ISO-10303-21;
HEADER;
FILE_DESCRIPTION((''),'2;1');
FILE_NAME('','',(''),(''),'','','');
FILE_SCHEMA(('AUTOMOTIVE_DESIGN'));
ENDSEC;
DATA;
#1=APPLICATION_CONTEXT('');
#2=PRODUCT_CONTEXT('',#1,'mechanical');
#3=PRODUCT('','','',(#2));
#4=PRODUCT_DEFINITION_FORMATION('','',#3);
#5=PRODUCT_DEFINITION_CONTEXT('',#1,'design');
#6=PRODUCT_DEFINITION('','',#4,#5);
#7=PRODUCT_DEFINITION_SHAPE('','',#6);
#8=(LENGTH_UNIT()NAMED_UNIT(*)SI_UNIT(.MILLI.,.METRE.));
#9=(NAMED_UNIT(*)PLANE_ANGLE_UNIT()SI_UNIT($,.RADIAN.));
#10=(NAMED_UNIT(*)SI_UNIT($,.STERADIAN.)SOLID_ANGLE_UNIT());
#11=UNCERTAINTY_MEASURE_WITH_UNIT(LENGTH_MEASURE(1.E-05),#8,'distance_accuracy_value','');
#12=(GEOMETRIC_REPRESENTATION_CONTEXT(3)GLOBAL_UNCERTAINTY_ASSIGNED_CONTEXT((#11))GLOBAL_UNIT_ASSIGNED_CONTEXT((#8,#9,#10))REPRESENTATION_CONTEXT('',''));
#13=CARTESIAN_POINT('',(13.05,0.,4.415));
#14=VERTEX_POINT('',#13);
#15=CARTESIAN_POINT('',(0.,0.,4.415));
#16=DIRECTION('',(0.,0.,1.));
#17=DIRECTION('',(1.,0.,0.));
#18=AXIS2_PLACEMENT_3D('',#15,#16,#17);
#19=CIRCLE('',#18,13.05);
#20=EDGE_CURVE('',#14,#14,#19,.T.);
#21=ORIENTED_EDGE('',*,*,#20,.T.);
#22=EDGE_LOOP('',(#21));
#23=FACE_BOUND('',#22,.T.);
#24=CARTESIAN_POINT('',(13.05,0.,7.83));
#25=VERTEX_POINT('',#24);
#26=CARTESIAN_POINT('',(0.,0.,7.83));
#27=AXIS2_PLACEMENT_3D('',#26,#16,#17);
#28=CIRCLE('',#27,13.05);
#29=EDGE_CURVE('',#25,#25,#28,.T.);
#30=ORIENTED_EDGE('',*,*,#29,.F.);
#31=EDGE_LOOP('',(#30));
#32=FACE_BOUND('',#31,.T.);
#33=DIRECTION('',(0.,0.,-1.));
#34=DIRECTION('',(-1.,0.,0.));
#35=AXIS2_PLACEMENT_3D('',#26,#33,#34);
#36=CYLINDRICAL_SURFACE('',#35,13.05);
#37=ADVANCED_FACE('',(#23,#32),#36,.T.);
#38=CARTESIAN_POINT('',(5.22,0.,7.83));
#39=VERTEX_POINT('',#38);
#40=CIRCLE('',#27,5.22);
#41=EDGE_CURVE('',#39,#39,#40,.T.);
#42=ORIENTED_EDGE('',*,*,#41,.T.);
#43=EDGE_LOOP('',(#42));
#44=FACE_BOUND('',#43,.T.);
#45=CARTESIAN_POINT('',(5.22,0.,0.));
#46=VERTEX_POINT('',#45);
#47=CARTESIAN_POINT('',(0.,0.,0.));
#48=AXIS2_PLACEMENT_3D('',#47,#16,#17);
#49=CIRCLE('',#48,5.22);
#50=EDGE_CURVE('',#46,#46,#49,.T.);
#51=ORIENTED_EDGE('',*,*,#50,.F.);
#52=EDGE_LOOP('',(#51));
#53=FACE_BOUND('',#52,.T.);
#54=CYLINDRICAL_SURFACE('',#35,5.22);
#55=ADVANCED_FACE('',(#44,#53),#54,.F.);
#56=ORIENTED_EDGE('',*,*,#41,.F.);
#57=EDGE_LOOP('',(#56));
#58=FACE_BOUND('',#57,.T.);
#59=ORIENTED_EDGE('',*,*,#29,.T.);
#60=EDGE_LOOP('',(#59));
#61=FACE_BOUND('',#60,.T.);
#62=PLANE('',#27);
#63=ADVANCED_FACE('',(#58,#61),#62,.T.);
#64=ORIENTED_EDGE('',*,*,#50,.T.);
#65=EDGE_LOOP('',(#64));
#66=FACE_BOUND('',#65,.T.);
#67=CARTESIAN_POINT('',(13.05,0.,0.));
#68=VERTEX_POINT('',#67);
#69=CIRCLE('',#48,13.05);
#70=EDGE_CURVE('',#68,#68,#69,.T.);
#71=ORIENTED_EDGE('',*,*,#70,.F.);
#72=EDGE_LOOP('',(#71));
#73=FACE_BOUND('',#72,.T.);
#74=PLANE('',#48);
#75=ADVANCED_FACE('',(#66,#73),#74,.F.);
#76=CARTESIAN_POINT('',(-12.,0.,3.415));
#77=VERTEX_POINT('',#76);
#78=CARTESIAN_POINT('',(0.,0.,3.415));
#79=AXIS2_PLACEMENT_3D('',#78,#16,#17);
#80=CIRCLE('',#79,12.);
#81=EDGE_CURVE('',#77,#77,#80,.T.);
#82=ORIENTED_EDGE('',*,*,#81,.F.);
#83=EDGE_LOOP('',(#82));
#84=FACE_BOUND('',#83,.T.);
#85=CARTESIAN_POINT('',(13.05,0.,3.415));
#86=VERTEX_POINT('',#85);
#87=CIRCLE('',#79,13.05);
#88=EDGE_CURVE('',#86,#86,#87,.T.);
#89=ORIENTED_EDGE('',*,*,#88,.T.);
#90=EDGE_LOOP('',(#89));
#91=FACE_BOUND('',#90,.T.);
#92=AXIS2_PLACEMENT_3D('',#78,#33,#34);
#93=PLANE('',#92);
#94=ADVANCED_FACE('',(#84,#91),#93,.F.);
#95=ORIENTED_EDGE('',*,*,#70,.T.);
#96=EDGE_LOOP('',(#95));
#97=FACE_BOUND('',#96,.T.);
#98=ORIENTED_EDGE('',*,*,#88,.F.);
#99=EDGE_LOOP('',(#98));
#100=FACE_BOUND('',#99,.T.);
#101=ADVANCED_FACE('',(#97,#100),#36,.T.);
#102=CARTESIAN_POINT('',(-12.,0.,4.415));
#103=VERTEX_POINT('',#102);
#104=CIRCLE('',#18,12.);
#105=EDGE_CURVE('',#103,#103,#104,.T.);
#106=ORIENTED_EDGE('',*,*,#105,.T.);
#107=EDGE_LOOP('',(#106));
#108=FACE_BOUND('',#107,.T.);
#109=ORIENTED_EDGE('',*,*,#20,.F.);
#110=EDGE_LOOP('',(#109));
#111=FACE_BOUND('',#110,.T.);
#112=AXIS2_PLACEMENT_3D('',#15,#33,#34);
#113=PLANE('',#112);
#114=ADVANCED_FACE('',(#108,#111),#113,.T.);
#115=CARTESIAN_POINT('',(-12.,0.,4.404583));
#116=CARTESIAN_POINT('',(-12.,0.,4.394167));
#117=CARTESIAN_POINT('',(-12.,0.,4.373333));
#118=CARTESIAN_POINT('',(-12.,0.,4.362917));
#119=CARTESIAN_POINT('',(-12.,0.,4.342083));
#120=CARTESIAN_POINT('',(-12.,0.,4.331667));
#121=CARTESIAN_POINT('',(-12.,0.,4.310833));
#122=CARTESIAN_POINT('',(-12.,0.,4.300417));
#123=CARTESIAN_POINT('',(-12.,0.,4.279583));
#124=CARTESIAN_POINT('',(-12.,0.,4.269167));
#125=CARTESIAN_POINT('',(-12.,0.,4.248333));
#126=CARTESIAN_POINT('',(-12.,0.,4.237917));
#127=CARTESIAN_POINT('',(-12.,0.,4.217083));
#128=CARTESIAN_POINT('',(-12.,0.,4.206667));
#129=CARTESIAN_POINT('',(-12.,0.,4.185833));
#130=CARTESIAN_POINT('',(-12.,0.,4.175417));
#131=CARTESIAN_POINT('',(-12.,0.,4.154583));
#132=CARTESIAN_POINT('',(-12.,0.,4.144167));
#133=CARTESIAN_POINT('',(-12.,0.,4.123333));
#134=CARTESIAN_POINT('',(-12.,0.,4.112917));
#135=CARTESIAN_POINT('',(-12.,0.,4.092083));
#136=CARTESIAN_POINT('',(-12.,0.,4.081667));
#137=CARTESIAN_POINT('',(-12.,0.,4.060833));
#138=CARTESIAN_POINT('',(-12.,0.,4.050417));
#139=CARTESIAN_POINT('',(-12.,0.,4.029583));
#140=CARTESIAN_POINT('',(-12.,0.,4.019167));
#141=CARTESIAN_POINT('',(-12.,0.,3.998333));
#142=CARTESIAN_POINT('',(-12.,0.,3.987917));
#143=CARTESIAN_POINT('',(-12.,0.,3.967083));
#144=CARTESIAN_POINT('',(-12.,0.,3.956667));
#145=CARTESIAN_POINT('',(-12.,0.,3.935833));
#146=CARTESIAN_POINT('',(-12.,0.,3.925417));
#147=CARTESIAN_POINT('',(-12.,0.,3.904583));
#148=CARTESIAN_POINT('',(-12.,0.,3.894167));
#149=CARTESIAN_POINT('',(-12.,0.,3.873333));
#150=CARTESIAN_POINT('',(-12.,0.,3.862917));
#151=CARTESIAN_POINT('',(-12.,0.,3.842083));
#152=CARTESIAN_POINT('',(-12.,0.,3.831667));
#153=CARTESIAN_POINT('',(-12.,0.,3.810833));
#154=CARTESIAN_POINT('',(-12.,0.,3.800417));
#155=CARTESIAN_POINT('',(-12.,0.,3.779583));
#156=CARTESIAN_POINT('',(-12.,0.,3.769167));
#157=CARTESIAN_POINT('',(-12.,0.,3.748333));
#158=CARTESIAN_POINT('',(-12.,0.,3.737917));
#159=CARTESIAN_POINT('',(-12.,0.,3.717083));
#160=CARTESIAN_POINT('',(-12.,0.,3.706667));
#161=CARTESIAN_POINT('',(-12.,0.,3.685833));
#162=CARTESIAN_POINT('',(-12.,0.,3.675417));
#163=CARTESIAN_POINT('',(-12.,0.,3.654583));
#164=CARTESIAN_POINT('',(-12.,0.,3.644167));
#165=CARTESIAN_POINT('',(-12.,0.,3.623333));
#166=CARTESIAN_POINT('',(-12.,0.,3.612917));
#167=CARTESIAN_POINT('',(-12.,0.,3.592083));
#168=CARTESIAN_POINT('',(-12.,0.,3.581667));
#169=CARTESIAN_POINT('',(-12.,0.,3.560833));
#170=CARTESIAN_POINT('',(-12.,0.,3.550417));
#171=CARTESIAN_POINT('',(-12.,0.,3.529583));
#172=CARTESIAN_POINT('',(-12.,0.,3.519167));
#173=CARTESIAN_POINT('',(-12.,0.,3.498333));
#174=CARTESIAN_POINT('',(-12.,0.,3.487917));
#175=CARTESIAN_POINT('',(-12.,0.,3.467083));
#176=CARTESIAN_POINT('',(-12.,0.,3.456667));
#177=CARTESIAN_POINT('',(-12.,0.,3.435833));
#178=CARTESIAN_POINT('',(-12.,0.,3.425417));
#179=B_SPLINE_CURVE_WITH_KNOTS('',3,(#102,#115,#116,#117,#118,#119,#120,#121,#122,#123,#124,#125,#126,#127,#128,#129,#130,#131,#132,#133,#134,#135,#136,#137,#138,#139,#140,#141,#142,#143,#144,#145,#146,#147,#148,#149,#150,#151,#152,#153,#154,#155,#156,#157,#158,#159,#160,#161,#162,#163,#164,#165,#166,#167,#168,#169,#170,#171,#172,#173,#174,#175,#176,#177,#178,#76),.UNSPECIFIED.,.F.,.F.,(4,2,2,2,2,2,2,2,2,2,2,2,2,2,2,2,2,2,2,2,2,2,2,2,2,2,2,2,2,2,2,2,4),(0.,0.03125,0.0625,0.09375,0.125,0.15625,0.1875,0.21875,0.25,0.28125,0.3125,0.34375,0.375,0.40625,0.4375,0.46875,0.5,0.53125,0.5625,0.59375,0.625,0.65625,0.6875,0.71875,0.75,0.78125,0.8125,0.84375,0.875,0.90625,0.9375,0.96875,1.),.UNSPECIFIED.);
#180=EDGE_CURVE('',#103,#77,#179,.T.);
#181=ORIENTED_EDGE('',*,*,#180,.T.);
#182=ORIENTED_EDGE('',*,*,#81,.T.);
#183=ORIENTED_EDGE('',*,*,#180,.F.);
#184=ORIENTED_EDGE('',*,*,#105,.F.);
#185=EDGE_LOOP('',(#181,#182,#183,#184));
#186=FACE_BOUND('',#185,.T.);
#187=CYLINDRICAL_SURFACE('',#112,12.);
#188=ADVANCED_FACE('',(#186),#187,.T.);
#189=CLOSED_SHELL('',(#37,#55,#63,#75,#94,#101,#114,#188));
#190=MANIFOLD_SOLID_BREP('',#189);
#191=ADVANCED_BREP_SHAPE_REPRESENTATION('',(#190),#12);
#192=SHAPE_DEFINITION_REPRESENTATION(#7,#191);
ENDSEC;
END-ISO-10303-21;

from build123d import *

# Parameters (mm, degrees)
SKETCH1_R                = 13.05
SKETCH1_R_2              = 5.22
BOSS_EXTRUDE1_DEPTH      = 7.83
CUT_EXTRUDE1_START       = 3.415
CUT_EXTRUDE1_OUTLINE_R   = 13.05
CUT_EXTRUDE1_OUTLINE_R_2 = 12
CUT_EXTRUDE1_DEPTH       = 1


# Read off the part's stored shape, not the designer's step: Cut-Extrude1
with BuildPart() as part:
    # Sketch1 → Boss-Extrude1 (new body)
    with BuildSketch(Plane.XY):
        Circle(SKETCH1_R)
        Circle(SKETCH1_R_2, mode=Mode.SUBTRACT)
    extrude(amount=BOSS_EXTRUDE1_DEPTH)

    # Cut-Extrude1 outline → Cut-Extrude1 (cut)
    with BuildSketch(Plane.XY.offset(CUT_EXTRUDE1_START)):
        Circle(CUT_EXTRUDE1_OUTLINE_R)
        Circle(CUT_EXTRUDE1_OUTLINE_R_2, mode=Mode.SUBTRACT)
    extrude(amount=CUT_EXTRUDE1_DEPTH, mode=Mode.SUBTRACT)


solid = part.part
